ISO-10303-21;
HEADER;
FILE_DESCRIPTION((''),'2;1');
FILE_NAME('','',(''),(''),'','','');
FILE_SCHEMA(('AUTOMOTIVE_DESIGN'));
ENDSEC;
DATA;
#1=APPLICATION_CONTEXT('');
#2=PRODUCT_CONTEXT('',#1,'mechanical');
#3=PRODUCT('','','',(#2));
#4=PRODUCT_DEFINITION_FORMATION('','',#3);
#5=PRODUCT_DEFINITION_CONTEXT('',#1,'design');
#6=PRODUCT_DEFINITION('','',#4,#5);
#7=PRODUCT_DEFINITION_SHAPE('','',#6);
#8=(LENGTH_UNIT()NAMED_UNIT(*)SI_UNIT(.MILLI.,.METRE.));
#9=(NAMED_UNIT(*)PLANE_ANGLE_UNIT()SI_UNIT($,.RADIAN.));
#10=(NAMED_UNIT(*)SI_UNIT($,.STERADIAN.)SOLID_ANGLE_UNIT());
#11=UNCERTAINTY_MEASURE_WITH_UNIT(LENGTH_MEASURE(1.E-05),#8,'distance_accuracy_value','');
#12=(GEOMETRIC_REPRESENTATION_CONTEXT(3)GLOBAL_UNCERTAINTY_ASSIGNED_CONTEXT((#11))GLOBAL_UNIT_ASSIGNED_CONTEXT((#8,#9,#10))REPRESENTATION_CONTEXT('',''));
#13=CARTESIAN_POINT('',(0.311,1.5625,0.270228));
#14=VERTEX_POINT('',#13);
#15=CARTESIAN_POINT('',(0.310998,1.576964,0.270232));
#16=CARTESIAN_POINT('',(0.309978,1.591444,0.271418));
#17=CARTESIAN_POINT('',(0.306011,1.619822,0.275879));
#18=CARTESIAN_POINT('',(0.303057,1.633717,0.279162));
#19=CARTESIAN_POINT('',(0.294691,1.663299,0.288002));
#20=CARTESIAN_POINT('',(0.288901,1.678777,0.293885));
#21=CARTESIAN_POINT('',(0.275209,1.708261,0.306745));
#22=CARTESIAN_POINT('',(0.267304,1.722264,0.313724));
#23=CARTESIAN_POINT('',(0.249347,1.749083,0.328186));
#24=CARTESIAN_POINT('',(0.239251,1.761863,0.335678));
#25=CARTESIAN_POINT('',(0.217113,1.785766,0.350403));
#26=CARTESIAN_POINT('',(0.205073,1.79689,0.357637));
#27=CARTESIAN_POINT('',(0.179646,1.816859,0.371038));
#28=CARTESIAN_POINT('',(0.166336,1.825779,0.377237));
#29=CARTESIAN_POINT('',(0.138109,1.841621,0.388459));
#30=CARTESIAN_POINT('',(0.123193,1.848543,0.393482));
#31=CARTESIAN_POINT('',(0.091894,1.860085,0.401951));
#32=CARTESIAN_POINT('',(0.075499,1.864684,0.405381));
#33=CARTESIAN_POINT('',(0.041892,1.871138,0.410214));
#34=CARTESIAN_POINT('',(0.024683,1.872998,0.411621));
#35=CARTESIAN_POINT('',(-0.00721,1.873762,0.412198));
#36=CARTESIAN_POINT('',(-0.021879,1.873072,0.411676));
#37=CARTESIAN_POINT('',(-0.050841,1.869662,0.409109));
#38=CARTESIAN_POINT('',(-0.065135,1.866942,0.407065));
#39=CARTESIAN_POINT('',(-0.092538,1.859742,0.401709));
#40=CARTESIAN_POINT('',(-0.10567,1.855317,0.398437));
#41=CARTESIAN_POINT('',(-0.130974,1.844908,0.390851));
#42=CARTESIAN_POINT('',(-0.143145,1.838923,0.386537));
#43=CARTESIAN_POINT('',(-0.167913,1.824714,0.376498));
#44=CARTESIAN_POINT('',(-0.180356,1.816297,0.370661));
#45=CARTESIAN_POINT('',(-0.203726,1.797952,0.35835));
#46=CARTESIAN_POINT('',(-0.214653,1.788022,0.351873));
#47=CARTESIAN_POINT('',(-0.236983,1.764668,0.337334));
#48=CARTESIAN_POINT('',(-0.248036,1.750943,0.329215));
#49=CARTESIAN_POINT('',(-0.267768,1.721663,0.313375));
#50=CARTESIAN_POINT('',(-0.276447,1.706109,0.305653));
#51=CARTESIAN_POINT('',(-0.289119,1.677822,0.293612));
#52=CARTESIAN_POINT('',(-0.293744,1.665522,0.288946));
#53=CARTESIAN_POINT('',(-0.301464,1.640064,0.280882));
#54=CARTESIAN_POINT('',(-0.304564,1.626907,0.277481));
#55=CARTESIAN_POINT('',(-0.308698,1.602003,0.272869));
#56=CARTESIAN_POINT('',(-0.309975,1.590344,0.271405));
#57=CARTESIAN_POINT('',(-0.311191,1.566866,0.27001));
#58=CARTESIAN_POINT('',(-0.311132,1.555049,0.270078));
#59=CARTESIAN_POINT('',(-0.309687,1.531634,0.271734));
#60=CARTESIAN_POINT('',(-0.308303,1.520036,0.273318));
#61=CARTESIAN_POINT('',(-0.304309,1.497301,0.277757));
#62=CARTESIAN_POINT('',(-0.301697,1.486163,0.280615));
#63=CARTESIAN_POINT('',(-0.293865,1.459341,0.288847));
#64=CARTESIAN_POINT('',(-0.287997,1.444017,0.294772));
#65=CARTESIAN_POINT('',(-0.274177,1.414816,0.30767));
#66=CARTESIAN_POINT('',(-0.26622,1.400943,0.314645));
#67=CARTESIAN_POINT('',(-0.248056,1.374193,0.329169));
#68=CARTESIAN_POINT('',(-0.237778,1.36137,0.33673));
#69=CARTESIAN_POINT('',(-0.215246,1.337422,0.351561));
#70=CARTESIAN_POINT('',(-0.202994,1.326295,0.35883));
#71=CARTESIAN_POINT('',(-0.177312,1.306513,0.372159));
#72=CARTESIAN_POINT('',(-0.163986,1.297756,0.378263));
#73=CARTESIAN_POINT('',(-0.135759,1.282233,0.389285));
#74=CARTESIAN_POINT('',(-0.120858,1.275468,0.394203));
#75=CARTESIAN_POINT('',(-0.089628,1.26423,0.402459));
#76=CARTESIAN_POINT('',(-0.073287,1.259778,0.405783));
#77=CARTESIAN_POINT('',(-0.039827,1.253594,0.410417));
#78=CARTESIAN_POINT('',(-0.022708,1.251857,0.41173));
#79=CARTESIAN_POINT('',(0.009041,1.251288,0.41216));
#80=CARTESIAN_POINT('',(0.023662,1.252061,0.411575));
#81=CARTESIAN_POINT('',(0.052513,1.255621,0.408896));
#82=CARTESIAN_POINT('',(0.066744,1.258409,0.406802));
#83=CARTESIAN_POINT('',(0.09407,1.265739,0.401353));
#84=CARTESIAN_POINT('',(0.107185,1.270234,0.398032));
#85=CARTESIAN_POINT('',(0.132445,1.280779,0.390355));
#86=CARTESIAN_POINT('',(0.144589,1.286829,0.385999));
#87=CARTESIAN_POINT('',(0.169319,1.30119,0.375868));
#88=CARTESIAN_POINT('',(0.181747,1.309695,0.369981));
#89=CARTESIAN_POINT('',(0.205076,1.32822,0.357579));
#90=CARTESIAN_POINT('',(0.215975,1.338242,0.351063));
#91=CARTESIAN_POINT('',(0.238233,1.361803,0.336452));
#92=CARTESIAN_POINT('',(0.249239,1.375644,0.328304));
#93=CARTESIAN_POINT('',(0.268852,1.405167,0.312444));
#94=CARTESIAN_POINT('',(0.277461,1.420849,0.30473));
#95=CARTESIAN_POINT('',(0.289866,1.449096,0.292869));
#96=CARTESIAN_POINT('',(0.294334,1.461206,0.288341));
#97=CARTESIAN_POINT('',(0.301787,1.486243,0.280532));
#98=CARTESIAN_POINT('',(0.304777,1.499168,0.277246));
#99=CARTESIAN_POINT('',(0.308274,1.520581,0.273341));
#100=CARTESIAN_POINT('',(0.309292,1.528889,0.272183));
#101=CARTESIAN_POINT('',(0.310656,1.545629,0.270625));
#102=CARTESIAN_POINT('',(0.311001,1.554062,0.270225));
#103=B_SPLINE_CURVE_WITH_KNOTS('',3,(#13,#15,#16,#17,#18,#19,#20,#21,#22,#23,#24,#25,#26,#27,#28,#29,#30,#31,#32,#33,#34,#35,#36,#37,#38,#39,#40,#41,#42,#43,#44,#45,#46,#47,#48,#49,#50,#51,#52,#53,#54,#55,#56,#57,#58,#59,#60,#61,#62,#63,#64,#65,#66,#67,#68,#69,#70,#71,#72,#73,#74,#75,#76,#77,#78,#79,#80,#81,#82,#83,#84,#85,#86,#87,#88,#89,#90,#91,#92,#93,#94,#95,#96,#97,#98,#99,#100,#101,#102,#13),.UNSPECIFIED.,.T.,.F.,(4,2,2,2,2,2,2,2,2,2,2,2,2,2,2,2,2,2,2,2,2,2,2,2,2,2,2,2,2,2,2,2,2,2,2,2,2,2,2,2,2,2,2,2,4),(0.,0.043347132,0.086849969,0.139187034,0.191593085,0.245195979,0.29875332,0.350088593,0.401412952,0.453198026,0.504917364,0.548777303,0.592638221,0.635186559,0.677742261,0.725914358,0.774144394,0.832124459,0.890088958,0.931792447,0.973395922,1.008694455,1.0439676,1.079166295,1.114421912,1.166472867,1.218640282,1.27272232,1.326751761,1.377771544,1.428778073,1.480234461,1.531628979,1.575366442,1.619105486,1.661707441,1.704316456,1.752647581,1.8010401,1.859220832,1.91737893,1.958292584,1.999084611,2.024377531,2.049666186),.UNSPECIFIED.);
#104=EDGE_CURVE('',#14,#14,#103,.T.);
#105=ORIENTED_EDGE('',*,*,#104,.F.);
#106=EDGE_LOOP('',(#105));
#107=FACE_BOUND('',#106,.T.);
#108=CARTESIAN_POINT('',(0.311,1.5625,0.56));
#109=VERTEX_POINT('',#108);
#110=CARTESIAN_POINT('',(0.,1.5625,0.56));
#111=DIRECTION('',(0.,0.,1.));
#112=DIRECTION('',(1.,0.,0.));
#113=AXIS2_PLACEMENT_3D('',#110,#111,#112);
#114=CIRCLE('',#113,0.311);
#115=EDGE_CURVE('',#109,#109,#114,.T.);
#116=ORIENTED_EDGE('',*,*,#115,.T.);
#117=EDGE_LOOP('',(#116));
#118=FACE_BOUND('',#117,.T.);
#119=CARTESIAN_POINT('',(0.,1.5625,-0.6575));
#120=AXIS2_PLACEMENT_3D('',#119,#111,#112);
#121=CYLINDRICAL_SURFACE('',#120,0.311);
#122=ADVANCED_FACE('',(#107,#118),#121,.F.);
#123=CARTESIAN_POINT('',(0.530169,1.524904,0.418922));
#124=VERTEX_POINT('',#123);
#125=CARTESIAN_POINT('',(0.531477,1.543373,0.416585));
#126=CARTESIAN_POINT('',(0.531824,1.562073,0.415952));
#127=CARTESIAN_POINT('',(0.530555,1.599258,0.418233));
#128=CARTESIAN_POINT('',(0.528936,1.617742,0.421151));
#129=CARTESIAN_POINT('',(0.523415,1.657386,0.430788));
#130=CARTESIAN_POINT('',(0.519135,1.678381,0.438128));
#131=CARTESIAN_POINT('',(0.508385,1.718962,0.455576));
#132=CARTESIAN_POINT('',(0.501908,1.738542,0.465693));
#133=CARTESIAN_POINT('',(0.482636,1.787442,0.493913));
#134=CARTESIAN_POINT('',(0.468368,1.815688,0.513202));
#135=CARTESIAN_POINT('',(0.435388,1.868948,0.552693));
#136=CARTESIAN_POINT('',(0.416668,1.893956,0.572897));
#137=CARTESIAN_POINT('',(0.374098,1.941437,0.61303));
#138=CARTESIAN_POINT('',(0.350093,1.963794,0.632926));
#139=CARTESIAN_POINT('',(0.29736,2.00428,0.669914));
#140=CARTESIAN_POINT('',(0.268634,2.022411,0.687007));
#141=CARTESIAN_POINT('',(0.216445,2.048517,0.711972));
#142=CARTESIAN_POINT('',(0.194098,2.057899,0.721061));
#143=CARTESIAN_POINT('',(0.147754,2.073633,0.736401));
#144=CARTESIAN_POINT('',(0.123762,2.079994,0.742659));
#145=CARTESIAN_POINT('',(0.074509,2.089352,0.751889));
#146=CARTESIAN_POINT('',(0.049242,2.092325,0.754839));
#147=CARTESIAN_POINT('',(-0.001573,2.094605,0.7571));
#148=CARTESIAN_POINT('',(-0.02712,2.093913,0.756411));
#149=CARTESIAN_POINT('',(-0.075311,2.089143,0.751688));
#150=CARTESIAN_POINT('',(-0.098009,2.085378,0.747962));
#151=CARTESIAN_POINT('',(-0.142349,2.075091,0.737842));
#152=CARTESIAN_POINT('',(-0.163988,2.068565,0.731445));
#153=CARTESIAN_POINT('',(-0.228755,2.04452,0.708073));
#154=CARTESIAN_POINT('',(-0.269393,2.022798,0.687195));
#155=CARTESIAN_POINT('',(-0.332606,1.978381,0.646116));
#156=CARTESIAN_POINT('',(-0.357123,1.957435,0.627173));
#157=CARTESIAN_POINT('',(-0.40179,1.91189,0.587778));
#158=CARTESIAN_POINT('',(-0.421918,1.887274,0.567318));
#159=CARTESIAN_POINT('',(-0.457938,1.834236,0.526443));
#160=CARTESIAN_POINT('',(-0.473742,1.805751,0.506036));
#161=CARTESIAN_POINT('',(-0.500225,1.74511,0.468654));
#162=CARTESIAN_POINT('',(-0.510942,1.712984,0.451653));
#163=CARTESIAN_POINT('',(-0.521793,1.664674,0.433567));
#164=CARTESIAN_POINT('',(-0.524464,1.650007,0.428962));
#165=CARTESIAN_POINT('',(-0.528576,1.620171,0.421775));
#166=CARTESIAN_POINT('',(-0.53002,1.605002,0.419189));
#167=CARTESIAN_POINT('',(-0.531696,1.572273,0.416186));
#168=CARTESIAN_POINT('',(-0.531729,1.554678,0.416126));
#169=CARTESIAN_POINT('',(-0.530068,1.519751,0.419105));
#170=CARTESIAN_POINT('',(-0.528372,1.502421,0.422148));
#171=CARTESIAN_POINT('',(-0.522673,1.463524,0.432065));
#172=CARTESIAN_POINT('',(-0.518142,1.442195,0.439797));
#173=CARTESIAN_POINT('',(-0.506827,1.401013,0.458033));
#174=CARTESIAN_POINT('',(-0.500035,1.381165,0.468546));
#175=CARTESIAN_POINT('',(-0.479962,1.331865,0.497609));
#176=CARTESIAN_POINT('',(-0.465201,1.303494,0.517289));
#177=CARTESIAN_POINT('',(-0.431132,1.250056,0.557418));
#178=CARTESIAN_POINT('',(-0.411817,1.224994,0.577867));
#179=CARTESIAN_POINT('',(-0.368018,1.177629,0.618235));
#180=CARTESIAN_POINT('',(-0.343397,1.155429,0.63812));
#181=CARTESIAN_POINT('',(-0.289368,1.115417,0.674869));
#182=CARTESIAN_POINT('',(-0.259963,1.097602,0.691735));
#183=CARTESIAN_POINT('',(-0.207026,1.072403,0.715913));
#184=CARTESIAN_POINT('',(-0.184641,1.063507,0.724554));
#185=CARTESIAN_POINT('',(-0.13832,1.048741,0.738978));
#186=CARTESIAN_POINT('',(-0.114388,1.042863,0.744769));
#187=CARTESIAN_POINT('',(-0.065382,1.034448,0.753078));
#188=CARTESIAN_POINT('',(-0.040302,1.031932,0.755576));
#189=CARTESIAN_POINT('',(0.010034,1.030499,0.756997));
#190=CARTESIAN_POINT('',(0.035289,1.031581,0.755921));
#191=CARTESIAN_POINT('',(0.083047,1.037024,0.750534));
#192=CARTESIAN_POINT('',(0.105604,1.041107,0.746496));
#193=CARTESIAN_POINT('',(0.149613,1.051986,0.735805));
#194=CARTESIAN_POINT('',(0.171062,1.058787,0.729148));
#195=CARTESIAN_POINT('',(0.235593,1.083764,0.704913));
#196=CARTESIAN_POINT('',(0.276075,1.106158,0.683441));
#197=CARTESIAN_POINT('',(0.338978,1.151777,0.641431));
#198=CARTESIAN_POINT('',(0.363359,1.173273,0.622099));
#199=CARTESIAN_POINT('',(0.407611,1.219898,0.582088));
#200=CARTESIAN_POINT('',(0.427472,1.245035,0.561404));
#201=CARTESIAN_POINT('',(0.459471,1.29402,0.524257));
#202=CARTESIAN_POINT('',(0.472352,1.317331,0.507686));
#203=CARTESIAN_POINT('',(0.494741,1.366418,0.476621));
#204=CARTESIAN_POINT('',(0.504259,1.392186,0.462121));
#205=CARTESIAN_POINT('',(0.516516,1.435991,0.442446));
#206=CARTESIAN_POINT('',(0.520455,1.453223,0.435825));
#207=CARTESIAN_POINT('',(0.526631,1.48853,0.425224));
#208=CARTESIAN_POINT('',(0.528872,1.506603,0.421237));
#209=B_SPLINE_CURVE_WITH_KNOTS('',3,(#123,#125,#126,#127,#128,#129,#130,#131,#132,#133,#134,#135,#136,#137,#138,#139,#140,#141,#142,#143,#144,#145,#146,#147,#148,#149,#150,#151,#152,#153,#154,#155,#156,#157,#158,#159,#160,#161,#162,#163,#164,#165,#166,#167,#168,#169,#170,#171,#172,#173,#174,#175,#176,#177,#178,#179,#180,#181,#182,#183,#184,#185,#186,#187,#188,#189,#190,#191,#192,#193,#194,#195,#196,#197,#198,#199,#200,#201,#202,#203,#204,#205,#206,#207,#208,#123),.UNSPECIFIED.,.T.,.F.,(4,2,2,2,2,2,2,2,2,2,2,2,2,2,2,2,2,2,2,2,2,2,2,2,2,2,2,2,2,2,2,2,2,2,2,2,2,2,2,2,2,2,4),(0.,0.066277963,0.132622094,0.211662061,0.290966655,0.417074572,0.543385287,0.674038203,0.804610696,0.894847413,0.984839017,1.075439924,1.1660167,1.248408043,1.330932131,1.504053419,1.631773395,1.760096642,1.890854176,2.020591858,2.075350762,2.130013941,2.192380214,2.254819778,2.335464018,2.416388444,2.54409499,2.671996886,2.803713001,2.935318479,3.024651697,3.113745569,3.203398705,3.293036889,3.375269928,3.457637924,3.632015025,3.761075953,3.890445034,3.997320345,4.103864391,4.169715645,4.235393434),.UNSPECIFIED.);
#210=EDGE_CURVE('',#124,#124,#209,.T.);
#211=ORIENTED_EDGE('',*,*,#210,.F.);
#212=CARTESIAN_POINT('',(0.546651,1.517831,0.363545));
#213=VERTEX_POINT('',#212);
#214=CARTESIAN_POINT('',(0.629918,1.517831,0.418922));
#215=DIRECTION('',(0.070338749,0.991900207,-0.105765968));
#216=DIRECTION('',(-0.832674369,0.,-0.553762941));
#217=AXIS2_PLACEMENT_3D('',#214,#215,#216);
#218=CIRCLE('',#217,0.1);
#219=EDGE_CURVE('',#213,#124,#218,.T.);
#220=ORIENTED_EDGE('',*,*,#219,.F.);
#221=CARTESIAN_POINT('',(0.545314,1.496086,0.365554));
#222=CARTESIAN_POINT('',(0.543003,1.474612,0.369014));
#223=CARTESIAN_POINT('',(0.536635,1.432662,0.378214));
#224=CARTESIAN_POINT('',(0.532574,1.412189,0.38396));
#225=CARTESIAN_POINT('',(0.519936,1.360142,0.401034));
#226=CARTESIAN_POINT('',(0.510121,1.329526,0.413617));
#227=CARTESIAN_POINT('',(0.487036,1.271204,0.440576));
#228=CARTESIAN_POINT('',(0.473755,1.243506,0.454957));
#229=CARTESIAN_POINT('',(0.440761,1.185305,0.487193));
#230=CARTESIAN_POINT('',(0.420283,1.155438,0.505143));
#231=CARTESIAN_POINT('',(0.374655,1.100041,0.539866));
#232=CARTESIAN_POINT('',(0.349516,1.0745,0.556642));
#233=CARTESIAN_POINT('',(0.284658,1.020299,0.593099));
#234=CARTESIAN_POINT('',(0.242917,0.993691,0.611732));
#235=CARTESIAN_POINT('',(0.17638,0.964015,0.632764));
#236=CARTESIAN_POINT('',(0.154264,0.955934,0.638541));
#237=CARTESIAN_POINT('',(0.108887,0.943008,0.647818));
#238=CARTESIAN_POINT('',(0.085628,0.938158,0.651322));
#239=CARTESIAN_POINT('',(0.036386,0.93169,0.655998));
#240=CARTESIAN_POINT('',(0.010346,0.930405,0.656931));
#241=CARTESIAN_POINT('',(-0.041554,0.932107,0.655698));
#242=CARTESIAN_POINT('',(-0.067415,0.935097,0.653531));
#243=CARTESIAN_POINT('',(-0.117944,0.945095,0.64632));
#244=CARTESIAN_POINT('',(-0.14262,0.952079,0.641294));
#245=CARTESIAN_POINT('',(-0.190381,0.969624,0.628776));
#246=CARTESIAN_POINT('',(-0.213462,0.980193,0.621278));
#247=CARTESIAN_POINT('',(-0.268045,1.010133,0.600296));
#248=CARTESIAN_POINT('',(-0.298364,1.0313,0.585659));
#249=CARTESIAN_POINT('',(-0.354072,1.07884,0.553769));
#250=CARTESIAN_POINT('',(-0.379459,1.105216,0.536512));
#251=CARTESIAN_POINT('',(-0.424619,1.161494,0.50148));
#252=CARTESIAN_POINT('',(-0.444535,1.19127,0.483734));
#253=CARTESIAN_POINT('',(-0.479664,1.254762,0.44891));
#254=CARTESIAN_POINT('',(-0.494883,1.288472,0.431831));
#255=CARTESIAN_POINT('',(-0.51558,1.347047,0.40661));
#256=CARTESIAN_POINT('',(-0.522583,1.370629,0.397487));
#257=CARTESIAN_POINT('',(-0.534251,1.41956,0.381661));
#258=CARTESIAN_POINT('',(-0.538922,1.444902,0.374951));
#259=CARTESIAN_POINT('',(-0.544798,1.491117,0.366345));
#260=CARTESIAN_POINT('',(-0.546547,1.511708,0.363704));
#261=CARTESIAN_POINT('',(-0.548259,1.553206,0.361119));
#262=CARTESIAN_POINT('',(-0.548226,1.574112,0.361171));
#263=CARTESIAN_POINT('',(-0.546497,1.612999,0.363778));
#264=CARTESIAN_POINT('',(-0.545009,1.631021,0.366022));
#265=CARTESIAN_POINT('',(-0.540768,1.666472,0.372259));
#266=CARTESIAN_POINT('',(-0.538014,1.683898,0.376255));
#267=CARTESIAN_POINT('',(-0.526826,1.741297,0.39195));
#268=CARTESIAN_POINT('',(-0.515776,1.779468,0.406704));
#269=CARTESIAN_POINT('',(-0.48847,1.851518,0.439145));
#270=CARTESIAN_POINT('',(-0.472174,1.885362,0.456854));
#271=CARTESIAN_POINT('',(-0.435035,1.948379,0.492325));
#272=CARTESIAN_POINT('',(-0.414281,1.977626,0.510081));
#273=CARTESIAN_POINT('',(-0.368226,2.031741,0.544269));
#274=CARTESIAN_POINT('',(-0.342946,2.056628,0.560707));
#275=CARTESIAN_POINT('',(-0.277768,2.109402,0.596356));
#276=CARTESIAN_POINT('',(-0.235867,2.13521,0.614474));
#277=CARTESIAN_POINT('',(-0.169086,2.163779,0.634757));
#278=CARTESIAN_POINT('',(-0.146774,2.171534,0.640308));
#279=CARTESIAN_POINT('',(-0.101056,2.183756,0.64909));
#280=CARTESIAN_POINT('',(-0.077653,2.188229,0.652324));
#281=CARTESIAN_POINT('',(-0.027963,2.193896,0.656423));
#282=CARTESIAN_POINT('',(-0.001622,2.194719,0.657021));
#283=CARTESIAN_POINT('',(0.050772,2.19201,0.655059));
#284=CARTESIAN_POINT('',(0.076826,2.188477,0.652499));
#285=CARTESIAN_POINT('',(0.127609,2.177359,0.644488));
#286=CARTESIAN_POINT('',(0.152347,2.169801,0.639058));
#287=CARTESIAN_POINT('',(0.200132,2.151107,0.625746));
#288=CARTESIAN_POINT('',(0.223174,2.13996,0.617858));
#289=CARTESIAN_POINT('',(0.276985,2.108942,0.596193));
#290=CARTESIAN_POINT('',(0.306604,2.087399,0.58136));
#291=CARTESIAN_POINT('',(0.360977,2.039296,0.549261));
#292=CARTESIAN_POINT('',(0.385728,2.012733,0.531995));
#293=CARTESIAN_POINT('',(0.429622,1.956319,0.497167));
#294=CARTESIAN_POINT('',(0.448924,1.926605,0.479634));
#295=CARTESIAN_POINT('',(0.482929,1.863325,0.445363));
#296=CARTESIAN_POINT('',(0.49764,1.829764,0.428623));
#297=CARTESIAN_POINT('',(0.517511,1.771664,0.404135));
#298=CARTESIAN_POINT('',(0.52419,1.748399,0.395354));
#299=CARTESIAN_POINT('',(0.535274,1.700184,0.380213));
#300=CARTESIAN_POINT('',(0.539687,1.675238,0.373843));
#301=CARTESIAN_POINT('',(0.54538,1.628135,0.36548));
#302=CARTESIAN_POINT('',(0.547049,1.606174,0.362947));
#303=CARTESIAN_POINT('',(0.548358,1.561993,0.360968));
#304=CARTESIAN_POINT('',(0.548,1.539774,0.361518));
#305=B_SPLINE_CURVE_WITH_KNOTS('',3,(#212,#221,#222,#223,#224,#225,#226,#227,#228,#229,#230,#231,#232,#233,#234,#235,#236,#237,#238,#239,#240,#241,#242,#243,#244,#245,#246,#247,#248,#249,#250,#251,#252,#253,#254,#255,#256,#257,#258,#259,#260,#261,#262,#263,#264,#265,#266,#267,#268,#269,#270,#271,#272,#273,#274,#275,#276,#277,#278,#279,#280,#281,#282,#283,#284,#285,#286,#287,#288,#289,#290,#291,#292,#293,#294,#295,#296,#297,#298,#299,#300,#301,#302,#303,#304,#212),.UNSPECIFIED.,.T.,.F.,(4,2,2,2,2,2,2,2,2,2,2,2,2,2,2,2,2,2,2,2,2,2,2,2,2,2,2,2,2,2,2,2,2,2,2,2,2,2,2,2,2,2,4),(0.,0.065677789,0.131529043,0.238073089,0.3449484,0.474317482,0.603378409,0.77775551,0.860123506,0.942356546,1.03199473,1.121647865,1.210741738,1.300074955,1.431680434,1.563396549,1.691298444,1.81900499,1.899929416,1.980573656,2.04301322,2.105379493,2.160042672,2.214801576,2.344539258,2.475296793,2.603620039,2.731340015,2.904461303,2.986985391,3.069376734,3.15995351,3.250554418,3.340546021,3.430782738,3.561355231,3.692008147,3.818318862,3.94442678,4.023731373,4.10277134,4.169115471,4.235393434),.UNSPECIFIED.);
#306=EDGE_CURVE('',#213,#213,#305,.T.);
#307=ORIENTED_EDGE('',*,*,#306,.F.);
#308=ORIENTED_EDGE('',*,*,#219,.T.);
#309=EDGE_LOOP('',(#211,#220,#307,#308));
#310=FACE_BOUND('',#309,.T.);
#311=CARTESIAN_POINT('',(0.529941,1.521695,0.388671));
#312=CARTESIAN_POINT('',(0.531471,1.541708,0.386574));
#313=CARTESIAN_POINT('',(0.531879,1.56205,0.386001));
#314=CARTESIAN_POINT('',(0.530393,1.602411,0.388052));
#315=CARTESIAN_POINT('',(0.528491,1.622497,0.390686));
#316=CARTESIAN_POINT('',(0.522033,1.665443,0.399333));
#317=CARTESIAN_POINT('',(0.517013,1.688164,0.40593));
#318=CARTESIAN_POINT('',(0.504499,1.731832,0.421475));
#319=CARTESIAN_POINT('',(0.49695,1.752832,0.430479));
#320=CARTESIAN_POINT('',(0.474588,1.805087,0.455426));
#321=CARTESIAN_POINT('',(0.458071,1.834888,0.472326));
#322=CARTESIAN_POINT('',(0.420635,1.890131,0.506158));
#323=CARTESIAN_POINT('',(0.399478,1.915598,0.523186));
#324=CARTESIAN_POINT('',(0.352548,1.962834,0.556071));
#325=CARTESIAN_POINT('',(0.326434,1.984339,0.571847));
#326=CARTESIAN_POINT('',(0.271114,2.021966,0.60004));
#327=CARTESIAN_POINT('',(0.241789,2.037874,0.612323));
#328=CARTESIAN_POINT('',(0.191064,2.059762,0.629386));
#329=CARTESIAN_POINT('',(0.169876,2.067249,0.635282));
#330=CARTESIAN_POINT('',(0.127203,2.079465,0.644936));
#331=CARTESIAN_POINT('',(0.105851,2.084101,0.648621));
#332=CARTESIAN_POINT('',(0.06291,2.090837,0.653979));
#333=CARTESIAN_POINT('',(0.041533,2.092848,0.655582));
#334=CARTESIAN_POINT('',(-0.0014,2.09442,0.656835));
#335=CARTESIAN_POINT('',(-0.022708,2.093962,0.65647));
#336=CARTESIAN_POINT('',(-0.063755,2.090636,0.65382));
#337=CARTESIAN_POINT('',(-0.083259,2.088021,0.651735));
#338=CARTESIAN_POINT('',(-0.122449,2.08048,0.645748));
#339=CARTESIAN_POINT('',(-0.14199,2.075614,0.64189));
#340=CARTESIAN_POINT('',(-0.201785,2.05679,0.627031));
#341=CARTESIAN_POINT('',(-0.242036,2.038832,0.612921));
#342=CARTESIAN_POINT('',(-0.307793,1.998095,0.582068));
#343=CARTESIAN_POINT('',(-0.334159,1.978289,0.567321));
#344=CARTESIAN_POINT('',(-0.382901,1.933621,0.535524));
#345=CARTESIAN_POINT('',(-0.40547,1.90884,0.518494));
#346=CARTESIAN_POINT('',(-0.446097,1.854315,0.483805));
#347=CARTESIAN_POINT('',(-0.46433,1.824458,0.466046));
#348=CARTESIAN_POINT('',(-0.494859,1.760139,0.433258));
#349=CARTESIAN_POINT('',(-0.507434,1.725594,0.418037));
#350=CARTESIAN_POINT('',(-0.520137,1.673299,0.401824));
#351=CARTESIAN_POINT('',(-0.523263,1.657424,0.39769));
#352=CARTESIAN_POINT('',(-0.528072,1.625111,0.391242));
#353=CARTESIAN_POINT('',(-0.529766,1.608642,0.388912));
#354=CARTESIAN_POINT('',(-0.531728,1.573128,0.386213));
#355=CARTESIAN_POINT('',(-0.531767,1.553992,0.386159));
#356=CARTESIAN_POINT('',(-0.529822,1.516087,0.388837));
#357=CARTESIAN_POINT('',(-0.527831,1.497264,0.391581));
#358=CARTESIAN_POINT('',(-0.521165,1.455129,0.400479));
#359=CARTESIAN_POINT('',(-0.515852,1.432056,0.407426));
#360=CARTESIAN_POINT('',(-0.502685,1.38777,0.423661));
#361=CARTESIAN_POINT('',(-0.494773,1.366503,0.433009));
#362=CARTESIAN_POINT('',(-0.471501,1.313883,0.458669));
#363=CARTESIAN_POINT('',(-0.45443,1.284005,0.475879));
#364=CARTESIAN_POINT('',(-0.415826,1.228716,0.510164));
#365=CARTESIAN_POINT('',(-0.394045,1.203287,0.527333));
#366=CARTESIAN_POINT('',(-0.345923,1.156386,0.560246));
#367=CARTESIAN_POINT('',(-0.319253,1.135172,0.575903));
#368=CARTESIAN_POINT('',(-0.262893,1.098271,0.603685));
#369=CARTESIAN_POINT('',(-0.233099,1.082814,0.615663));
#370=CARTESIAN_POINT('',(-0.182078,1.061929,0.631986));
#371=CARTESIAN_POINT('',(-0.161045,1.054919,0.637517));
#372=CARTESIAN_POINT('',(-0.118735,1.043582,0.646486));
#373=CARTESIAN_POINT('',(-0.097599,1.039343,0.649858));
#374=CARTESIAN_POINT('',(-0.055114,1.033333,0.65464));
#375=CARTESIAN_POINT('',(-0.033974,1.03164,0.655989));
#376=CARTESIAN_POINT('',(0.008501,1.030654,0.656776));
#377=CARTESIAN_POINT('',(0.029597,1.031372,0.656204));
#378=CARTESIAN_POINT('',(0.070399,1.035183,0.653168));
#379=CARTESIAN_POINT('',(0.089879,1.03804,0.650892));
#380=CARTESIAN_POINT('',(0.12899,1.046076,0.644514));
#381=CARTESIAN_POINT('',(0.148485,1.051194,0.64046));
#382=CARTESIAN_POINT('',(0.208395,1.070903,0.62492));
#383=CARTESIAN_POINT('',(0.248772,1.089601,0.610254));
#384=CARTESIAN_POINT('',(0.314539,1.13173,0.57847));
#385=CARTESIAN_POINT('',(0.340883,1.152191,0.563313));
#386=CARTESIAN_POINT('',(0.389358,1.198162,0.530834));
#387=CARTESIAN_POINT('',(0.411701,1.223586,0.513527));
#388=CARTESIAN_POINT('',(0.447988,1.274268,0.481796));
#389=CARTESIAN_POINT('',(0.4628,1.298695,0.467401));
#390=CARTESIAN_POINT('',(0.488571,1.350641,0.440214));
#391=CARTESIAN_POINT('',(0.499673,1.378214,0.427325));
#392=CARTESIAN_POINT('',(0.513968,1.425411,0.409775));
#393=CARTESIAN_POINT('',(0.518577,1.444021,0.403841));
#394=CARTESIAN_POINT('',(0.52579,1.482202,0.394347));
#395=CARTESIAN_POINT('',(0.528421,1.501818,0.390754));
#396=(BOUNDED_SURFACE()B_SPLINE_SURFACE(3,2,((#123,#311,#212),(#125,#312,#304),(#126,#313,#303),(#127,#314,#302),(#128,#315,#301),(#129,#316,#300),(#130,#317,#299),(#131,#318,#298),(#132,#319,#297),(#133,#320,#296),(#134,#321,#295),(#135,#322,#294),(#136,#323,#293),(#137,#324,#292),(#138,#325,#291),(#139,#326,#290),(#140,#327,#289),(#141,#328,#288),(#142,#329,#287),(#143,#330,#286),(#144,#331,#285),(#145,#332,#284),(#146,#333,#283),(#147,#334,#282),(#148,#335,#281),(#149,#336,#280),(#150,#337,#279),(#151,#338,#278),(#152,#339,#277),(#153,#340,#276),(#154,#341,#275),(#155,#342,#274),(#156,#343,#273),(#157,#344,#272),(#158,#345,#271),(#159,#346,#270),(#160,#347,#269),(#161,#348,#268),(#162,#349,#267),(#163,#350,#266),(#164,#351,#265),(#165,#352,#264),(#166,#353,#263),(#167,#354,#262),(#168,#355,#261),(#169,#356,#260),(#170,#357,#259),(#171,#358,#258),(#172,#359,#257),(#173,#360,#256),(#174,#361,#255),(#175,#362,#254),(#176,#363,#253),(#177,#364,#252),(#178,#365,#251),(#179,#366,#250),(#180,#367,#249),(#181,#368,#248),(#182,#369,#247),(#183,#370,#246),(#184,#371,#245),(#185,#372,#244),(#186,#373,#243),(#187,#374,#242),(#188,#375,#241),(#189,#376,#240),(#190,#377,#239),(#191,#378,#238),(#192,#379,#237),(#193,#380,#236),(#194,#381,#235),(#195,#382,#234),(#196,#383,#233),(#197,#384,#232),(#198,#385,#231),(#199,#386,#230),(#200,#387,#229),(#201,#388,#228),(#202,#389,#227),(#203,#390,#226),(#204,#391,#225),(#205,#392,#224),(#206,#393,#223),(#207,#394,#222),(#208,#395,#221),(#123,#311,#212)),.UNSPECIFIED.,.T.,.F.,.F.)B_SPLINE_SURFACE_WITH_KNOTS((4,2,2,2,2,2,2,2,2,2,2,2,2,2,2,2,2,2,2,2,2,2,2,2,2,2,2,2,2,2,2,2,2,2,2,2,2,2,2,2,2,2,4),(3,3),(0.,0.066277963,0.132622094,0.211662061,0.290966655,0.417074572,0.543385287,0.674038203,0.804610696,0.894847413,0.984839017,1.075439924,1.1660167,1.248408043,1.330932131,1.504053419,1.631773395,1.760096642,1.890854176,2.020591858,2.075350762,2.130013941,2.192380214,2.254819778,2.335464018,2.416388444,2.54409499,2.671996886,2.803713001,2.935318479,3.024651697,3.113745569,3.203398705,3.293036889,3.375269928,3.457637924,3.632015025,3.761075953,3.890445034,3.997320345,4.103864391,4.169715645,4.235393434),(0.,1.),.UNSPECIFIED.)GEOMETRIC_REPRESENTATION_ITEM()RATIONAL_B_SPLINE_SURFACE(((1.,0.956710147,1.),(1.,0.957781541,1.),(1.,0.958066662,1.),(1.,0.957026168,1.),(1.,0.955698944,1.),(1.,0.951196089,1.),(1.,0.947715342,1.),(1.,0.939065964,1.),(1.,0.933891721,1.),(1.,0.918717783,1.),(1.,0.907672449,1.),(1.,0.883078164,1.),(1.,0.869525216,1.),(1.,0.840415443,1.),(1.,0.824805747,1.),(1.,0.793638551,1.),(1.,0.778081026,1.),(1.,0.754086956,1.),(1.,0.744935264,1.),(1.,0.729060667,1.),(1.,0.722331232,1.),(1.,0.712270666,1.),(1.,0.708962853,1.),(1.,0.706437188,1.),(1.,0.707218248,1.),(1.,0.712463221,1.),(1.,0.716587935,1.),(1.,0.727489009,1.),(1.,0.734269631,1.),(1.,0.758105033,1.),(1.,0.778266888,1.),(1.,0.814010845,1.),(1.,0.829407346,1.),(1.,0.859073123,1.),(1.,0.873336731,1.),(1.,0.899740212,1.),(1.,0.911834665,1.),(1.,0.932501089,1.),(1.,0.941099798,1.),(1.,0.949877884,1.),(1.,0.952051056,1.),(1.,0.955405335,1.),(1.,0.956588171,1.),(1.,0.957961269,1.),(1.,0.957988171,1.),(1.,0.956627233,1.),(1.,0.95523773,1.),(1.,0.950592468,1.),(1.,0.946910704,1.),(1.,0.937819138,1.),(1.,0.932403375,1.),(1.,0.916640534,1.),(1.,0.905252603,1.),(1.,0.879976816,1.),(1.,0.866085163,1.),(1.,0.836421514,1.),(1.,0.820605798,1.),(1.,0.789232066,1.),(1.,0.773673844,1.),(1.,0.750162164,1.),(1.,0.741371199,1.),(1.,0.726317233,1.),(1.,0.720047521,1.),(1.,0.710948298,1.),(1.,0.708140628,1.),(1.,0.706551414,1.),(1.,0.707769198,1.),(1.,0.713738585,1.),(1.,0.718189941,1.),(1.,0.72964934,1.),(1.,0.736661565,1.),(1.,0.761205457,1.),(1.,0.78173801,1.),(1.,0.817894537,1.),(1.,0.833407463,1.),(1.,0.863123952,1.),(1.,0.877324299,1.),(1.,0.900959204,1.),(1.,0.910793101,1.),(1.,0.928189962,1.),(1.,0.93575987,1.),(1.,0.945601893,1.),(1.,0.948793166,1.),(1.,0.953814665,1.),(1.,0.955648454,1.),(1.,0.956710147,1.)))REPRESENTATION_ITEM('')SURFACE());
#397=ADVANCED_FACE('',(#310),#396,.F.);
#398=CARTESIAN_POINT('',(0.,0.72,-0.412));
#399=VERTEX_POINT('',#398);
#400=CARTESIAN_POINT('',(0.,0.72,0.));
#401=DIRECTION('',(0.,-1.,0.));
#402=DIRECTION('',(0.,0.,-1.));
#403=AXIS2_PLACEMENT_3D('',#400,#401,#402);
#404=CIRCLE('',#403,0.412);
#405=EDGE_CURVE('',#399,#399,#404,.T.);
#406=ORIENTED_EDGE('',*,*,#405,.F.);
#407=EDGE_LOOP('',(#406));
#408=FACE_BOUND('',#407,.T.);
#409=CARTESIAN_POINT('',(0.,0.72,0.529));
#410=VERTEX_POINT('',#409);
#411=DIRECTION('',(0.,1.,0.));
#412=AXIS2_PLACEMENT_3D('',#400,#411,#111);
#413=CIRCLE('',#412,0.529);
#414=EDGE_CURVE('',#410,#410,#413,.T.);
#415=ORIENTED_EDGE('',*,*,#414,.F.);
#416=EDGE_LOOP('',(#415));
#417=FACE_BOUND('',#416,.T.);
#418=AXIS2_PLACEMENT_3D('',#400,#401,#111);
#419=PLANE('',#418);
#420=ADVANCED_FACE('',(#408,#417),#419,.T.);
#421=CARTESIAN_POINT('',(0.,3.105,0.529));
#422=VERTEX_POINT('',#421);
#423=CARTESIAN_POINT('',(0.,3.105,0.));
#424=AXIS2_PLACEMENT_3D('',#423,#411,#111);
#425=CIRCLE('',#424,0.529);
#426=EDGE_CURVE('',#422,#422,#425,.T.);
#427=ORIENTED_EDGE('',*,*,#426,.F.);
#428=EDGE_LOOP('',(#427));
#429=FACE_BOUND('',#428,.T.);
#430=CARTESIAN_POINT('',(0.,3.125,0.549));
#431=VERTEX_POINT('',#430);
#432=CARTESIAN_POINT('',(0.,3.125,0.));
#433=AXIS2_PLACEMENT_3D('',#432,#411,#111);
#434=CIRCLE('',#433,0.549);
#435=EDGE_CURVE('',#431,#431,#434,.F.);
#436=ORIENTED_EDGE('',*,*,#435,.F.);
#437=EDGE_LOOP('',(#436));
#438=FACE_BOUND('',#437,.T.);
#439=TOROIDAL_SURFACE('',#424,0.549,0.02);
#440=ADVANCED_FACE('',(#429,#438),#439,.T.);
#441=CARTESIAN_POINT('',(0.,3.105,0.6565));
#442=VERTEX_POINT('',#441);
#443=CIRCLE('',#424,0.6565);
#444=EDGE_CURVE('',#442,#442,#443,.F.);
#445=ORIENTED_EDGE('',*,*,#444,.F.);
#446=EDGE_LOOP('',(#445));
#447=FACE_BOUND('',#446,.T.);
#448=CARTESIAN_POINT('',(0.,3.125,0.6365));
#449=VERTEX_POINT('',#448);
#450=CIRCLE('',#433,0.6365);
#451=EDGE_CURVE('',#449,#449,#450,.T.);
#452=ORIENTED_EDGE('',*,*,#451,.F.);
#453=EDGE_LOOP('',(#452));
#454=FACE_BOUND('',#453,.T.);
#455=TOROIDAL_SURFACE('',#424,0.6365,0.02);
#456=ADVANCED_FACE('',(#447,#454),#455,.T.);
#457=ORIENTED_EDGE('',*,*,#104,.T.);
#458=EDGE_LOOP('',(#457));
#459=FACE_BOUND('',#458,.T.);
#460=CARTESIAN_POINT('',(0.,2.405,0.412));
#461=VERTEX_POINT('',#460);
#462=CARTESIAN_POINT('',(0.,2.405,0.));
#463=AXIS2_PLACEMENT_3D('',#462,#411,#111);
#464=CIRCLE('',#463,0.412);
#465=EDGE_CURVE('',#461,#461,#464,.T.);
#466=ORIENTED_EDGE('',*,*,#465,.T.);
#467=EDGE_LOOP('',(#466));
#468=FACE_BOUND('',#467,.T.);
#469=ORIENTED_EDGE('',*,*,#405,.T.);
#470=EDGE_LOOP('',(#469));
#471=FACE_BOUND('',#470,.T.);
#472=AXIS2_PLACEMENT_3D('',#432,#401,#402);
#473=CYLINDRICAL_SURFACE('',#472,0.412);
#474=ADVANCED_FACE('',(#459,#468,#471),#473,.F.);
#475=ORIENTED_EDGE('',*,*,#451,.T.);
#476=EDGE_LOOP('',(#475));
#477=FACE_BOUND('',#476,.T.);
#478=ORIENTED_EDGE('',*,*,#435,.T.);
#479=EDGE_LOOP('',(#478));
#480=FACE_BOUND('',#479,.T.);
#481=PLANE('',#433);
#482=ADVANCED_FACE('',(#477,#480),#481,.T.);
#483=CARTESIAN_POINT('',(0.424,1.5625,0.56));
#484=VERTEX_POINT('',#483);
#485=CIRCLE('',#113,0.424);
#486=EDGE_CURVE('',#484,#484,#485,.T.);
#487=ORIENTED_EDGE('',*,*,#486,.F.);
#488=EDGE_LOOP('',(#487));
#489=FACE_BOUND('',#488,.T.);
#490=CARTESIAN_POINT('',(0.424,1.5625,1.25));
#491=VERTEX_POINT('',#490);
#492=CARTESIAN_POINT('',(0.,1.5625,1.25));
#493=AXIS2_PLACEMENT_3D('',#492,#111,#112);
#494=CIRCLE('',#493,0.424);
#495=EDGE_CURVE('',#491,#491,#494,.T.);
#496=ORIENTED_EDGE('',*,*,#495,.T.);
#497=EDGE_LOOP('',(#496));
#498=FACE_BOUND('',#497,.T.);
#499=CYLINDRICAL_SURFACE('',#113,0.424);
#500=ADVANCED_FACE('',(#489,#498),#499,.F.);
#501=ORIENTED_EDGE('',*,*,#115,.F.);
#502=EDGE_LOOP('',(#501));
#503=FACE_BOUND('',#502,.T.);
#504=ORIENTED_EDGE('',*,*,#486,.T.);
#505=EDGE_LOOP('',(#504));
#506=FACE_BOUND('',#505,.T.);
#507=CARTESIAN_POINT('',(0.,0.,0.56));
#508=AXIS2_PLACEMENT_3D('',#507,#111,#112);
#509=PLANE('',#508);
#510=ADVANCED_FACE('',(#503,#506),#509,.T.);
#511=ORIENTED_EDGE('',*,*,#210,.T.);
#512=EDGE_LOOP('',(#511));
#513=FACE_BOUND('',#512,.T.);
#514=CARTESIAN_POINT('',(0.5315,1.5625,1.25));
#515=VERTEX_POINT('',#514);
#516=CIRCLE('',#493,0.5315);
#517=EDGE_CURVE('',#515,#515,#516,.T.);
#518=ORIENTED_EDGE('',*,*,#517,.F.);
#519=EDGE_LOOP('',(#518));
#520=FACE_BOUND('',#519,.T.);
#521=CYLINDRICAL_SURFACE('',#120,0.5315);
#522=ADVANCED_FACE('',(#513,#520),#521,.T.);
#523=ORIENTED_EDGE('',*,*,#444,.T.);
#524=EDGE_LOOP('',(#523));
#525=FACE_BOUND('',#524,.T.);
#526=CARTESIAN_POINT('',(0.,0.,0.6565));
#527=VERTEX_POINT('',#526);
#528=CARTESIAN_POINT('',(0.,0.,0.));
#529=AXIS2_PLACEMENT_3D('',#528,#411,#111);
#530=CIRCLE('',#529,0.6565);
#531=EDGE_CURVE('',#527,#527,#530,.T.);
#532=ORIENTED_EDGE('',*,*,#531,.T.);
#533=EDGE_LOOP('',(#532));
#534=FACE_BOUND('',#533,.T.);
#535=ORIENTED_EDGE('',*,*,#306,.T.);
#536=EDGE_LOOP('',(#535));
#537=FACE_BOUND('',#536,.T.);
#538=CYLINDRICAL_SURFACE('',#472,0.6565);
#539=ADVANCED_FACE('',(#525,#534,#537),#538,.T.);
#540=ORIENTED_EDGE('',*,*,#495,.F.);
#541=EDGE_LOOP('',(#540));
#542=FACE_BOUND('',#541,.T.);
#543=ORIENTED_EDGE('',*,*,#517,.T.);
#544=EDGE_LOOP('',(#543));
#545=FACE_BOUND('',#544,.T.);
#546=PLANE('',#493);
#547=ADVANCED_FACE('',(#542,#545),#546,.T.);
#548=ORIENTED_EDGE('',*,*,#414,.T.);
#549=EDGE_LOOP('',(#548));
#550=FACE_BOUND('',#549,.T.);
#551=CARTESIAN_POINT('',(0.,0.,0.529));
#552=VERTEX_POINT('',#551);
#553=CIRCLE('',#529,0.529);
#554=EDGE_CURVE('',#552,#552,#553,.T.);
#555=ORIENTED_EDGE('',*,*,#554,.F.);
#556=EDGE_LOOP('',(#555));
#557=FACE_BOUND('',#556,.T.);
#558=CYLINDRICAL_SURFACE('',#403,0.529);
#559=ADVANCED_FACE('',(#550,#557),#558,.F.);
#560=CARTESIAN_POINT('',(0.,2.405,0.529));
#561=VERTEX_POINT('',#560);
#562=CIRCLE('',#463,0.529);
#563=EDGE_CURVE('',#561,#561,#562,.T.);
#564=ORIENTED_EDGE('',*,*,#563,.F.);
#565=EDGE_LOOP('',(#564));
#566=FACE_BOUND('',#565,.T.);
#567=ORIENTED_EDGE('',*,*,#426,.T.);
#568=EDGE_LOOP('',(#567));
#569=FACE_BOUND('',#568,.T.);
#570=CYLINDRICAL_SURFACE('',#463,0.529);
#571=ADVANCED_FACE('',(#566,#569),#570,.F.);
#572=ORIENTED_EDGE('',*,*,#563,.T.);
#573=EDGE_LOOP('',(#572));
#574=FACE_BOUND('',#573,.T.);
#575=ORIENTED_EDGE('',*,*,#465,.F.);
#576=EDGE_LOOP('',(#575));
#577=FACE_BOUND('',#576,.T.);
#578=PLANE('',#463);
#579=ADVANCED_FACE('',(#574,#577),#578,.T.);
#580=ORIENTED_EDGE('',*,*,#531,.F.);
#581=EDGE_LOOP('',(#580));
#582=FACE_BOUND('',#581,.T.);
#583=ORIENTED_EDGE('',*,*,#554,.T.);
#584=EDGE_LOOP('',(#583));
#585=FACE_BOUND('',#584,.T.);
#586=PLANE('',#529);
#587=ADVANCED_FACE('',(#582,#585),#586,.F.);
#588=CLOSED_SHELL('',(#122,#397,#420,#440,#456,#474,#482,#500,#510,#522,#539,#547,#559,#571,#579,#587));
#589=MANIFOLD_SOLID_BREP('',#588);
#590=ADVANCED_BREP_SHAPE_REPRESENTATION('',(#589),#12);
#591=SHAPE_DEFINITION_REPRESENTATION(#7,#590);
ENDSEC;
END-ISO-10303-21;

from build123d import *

# Parameters (mm, degrees)
SKETCH3_R                = 0.6565
SKETCH3_R_2              = 0.412
BOSS_EXTRUDE1_DEPTH      = 3.125
SKETCH4_R                = 0.529
CUT_EXTRUDE1_DEPTH       = 0.72
BOSS_EXTRUDE2_REACH      = 5.719
BOSS_EXTRUDE2_END_RADIUS = 0.6565
SKETCH6_R                = 0.5315
FILLET1_R                = 0.1
CUT_EXTRUDE3_START       = 0.56
CUT_EXTRUDE3_OUTLINE_R   = 0.424
CUT_EXTRUDE3_DEPTH       = 0.69
CUT_EXTRUDE4_REACH       = 5.719
CUT_EXTRUDE4_END_RADIUS  = 0.412
SKETCH8_R                = 0.311
FILLET3_R                = 0.02


# Read off the part's stored shape, not the designer's step: Cut-Extrude3
with BuildPart() as part:
    # Sketch3 → Boss-Extrude1 (new body)
    with BuildSketch(Plane(origin=(0, 0, 0), x_dir=(1, 0, 0), z_dir=(0, 1, 0))):
        with Locations(Location((0, 0, 0), (0, 0, 270))):
            Circle(SKETCH3_R)
        with Locations(Location((0, 0, 0), (0, 0, 270))):
            Circle(SKETCH3_R_2, mode=Mode.SUBTRACT)
    extrude(amount=BOSS_EXTRUDE1_DEPTH)

    # Sketch4 → Cut-Extrude1 (cut)
    with BuildSketch(Plane(origin=(0, 3.125, 0), x_dir=(1, 0, 0), z_dir=(0, 1, 0))):
        with Locations(Location((0, 0, 0), (0, 0, 270))):
            Circle(SKETCH4_R)
    cut_extrude1 = extrude(amount=-CUT_EXTRUDE1_DEPTH, mode=Mode.SUBTRACT)

    # Mirror1: Cut-Extrude1 across plane
    add(cut_extrude1.mirror(Plane.ZX.offset(1.5625)), mode=Mode.SUBTRACT)

    # Boss-Extrude2: up to this cylinder (the profile starts outside it)
    boss_extrude2_end = Plane(origin=(0, 1.5625, 0), z_dir=(0, -1, 0)) * Cylinder(BOSS_EXTRUDE2_END_RADIUS, 13.751, mode=Mode.PRIVATE)
    # Sketch6 → Boss-Extrude2 (add, up to the surface)
    with BuildSketch(Plane.XY.offset(1.25), mode=Mode.PRIVATE) as boss_extrude2_sk1:
        with Locations((0, 1.5625)):
            Circle(SKETCH6_R)
    boss_extrude2_tool1 = extrude(boss_extrude2_sk1.sketch, amount=-BOSS_EXTRUDE2_REACH, mode=Mode.PRIVATE) - boss_extrude2_end
    add(boss_extrude2_tool1.solids().sort_by_distance((0, 1.5625, 1.25))[0])

    # Fillet1
    fillet1_edges = [part.edges().sort_by_distance(p)[0] for p in [
        (-0.5315, 1.5625, 0.385356977),
    ]]
    fillet(fillet1_edges, radius=FILLET1_R)

    # Cut-Extrude3 outline → Cut-Extrude3 (cut)
    with BuildSketch(Plane.XY.offset(CUT_EXTRUDE3_START)):
        with Locations((0, 1.5625)):
            Circle(CUT_EXTRUDE3_OUTLINE_R)
    extrude(amount=CUT_EXTRUDE3_DEPTH, mode=Mode.SUBTRACT)

    # Cut-Extrude4: up to this cylinder (the profile starts outside it)
    cut_extrude4_end = Plane(origin=(0, 1.5625, 0), z_dir=(0, -1, 0)) * Cylinder(CUT_EXTRUDE4_END_RADIUS, 13.262, mode=Mode.PRIVATE)
    # Sketch8 → Cut-Extrude4 (cut, up to the surface)
    with BuildSketch(Plane.XY.offset(1.25), mode=Mode.PRIVATE) as cut_extrude4_sk1:
        with Locations((0, 1.5625)):
            Circle(SKETCH8_R)
    cut_extrude4_tool1 = extrude(cut_extrude4_sk1.sketch, amount=-CUT_EXTRUDE4_REACH, mode=Mode.PRIVATE) - cut_extrude4_end
    add(cut_extrude4_tool1.solids().sort_by_distance((0, 1.5625, 1.25))[0], mode=Mode.SUBTRACT)

    # Fillet3
    fillet3_edges = [part.edges().sort_by_distance(p)[0] for p in [
        (0, 3.125, -0.529),
        (0, 3.125, -0.6565),
    ]]
    fillet(fillet3_edges, radius=FILLET3_R)


solid = part.part
